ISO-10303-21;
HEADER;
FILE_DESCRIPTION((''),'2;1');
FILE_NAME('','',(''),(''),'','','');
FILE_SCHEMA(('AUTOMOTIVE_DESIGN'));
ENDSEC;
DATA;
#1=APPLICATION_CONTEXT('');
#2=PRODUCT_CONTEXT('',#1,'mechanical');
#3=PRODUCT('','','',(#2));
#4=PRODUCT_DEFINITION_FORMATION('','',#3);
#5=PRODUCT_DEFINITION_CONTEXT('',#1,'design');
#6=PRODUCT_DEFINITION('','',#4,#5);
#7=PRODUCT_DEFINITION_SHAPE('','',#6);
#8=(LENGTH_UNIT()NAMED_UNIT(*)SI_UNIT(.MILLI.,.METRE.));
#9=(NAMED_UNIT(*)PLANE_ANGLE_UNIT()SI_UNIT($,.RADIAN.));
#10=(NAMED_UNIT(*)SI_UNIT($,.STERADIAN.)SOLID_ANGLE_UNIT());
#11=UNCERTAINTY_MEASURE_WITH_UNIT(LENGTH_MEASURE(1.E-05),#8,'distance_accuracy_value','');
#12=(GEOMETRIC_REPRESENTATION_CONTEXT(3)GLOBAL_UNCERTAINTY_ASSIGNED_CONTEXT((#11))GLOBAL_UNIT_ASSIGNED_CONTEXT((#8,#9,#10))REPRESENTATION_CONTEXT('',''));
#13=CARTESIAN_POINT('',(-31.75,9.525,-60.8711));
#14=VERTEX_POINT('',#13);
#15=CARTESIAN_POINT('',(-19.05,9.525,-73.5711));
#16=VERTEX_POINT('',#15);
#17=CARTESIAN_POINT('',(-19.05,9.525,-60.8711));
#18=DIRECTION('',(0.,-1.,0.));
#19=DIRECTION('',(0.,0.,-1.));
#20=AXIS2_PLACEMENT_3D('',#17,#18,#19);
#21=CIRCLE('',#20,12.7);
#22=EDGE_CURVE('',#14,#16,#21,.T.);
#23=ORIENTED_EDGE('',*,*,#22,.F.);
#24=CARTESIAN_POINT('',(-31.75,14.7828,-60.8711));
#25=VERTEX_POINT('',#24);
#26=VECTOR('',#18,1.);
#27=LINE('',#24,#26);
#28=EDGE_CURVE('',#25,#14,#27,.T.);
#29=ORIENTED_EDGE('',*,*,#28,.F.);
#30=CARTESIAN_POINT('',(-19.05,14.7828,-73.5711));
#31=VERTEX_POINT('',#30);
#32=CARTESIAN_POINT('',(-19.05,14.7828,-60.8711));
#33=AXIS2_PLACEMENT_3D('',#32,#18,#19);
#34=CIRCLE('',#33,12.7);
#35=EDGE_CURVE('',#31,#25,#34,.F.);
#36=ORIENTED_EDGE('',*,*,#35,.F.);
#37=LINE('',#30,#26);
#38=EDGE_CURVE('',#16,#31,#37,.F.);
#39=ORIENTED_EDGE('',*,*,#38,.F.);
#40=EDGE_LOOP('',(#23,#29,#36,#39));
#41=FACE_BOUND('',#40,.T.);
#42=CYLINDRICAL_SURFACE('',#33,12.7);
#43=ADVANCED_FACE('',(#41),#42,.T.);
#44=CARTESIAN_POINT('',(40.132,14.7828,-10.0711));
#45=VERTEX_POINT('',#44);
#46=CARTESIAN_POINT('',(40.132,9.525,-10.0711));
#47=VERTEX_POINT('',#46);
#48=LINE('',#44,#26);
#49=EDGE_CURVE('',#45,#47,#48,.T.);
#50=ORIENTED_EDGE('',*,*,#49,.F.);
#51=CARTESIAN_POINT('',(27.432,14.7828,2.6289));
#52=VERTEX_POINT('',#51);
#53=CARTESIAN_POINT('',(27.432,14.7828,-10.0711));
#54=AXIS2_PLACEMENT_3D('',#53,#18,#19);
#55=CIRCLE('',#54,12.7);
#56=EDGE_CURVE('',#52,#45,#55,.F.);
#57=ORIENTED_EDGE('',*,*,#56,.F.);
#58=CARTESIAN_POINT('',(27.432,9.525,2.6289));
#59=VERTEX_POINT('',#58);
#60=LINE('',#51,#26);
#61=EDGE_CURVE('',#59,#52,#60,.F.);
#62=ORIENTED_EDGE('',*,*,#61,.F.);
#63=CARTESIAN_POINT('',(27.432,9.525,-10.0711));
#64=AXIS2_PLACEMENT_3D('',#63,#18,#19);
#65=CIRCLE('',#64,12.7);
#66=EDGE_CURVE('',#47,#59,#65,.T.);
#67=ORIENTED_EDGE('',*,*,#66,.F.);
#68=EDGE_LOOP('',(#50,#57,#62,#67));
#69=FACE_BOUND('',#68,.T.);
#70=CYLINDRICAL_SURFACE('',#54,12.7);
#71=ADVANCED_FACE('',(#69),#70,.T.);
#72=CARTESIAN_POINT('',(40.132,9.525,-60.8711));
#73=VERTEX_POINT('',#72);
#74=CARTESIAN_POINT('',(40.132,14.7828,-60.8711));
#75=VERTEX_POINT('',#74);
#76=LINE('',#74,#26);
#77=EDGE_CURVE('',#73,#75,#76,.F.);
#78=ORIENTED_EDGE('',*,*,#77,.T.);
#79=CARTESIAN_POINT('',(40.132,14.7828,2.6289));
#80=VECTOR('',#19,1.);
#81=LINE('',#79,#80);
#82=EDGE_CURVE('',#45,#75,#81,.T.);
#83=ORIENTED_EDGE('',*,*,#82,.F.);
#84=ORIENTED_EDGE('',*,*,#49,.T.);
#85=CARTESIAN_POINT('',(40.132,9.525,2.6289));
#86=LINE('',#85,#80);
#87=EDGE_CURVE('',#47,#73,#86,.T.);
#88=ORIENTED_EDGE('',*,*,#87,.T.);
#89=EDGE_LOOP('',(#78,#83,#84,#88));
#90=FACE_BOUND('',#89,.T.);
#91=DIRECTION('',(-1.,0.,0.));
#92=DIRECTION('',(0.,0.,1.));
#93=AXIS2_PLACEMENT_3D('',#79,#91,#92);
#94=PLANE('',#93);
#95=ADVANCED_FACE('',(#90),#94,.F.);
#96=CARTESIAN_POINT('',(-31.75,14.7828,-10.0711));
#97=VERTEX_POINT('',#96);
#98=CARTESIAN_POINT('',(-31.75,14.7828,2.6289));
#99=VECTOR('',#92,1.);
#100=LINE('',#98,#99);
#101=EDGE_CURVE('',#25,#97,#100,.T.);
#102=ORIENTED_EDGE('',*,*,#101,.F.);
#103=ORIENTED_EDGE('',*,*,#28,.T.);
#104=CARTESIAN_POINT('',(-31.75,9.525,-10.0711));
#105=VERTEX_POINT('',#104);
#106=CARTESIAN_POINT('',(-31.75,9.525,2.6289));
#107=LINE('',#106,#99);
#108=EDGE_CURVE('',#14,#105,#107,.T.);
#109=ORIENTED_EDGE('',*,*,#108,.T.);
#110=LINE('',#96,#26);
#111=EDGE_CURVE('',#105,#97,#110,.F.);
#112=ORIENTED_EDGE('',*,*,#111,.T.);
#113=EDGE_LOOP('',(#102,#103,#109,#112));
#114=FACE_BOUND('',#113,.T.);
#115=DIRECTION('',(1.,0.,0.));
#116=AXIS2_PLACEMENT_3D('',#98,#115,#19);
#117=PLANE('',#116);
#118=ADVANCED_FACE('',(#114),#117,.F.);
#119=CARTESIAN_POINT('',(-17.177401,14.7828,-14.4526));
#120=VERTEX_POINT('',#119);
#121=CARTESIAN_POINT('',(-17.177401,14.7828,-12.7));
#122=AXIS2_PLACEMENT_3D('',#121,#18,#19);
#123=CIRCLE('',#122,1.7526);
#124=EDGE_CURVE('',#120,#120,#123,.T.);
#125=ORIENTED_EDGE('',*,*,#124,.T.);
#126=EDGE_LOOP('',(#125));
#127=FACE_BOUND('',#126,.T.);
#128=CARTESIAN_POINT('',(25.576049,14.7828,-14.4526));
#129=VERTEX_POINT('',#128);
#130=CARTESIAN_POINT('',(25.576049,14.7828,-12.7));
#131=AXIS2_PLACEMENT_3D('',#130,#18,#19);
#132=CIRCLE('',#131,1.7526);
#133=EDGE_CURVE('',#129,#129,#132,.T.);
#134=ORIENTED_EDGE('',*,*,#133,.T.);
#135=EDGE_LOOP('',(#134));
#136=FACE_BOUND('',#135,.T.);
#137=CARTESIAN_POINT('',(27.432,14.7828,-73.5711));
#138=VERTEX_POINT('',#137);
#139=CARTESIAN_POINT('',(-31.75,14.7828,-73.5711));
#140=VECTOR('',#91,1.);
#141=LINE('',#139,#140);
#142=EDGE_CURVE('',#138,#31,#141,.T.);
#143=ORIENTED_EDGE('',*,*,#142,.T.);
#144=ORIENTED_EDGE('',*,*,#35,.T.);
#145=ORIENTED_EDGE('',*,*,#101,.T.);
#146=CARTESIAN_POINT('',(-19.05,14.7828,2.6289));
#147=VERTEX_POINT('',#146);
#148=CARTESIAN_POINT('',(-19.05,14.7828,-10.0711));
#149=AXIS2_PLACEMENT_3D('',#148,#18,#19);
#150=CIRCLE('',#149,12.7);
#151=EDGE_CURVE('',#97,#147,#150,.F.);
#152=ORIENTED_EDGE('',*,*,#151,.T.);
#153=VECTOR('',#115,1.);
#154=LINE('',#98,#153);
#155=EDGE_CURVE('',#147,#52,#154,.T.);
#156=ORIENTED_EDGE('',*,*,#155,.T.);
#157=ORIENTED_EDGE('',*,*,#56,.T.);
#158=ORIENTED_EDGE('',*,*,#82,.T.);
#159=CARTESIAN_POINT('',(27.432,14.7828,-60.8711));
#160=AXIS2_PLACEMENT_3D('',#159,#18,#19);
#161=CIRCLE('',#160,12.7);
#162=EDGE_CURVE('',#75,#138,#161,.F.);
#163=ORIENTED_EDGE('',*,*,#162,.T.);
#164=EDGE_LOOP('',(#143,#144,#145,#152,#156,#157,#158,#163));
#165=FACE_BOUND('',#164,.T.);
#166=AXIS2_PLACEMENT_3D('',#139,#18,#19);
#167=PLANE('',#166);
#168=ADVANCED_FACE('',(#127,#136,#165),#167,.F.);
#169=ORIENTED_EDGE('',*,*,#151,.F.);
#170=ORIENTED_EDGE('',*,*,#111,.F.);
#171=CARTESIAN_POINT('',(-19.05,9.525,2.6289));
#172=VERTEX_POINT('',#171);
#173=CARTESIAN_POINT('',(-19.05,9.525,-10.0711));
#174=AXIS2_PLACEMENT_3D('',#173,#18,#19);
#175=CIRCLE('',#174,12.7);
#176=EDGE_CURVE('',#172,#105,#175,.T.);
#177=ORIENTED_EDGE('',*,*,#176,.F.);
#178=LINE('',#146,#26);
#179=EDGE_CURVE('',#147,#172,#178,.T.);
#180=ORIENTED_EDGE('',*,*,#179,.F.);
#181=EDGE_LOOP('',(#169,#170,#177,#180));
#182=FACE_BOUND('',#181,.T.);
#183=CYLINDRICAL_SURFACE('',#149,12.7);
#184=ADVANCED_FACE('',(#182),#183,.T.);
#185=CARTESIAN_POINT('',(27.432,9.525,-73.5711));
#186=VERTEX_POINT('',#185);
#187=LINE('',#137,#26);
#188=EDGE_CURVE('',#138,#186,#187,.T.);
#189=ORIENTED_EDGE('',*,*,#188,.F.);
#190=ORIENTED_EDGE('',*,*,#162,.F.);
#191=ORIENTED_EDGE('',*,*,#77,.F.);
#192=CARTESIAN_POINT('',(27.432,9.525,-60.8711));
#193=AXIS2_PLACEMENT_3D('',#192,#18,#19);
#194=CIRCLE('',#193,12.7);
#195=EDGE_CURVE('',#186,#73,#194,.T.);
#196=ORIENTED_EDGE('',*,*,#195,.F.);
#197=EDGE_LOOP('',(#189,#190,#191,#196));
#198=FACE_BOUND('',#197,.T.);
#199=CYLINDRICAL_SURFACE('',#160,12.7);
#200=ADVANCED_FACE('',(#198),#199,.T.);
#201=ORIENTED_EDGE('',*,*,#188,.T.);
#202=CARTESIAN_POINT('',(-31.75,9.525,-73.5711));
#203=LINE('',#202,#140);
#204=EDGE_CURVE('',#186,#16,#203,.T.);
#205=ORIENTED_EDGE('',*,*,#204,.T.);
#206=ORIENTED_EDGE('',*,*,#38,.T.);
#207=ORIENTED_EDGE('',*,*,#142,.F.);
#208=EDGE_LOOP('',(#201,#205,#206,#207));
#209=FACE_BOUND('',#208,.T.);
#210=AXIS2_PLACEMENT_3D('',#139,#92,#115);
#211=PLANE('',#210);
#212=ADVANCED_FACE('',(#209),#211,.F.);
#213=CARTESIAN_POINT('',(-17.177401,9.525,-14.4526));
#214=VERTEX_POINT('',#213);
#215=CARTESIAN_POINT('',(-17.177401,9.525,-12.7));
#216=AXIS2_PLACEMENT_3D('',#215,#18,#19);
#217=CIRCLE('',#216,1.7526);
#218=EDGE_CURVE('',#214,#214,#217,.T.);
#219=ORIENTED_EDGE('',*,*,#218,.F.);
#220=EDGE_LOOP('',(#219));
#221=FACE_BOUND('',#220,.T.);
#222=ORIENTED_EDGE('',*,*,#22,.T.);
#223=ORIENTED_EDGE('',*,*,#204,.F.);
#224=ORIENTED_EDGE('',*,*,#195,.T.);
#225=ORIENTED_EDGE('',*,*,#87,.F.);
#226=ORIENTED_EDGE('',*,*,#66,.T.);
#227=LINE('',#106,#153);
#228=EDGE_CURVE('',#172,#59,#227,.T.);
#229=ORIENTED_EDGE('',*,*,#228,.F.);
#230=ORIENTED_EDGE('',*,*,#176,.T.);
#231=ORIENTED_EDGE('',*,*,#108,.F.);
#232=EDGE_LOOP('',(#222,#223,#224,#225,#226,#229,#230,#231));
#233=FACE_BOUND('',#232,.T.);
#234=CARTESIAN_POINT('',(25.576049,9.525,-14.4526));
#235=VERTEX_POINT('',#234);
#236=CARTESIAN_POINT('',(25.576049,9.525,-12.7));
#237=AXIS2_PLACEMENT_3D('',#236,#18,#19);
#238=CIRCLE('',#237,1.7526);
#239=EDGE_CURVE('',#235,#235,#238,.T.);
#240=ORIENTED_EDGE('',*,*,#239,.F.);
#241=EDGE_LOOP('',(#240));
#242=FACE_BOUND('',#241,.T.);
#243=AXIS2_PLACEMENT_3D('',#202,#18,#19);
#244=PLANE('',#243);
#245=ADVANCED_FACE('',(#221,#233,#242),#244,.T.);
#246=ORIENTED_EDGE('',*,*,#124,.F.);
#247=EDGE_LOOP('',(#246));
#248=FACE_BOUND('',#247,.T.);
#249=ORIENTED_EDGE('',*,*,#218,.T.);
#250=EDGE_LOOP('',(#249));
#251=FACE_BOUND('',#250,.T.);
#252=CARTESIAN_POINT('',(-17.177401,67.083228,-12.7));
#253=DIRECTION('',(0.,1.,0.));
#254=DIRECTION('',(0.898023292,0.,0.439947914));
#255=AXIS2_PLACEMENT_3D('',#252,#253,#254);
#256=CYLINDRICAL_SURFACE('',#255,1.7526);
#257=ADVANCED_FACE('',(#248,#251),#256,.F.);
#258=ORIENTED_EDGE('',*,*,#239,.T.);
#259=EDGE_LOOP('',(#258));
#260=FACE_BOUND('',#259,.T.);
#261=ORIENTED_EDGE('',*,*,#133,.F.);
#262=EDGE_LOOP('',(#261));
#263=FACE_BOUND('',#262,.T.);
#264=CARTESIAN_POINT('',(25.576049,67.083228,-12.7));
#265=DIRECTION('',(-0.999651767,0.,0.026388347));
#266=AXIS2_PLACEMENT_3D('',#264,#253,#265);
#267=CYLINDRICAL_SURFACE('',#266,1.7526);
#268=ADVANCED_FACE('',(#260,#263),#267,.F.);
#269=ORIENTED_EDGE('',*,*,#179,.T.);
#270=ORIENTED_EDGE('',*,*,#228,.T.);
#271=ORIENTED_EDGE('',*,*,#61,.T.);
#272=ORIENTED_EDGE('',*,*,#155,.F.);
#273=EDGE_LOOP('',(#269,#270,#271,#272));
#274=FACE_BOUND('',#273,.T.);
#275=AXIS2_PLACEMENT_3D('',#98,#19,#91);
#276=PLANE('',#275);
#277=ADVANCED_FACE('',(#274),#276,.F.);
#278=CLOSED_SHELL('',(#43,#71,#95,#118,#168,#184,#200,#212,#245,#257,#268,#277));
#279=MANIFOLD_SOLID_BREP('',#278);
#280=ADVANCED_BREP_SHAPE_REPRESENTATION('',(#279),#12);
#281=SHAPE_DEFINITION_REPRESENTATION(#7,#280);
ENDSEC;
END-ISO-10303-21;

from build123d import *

# Parameters (mm, degrees)
SKETCH2_W           = 71.882
SKETCH2_H           = 76.2
BOSS_EXTRUDE2_DEPTH = 5.2578
CAVITY1_START       = 9.525
CAVITY1_OUTLINE_R   = 1.7526
CAVITY1_DEPTH       = 5.2578
FILLET3_R           = 12.7
FILLET4_R           = 12.7
FILLET5_R           = 12.7
FILLET6_R           = 12.7


# Read off the part's stored shape, not the designer's step: Cavity1
with BuildPart() as part:
    # Sketch2 → Boss-Extrude2 (new body)
    with BuildSketch(Plane(origin=(0, 9.525, 0), x_dir=(1, 0, 0), z_dir=(0, 1, 0))):
        with Locations((4.191, 35.4711)):
            Rectangle(SKETCH2_W, SKETCH2_H)
    extrude(amount=BOSS_EXTRUDE2_DEPTH)

    # Cavity1 outline → Cavity1 (cut)
    with BuildSketch(Plane(origin=(0, 0, 0), x_dir=(1, 0, 0), z_dir=(0, 1, 0)).offset(CAVITY1_START)):
        with Locations((25.576048817, 12.7)):
            Circle(CAVITY1_OUTLINE_R)
        with Locations((-17.177400647, 12.7)):
            Circle(CAVITY1_OUTLINE_R)
    extrude(amount=CAVITY1_DEPTH, mode=Mode.SUBTRACT)

    # Fillet3
    fillet3_edges = [part.edges().sort_by_distance(p)[0] for p in [
        (40.132, 12.1539, 2.6289),
    ]]
    fillet(fillet3_edges, radius=FILLET3_R)

    # Fillet4
    fillet4_edges = [part.edges().sort_by_distance(p)[0] for p in [
        (-31.75, 12.1539, 2.6289),
    ]]
    fillet(fillet4_edges, radius=FILLET4_R)

    # Fillet5
    fillet5_edges = [part.edges().sort_by_distance(p)[0] for p in [
        (40.132, 12.1539, -73.5711),
    ]]
    fillet(fillet5_edges, radius=FILLET5_R)

    # Fillet6
    fillet6_edges = [part.edges().sort_by_distance(p)[0] for p in [
        (-31.75, 12.1539, -73.5711),
    ]]
    fillet(fillet6_edges, radius=FILLET6_R)


solid = part.part
